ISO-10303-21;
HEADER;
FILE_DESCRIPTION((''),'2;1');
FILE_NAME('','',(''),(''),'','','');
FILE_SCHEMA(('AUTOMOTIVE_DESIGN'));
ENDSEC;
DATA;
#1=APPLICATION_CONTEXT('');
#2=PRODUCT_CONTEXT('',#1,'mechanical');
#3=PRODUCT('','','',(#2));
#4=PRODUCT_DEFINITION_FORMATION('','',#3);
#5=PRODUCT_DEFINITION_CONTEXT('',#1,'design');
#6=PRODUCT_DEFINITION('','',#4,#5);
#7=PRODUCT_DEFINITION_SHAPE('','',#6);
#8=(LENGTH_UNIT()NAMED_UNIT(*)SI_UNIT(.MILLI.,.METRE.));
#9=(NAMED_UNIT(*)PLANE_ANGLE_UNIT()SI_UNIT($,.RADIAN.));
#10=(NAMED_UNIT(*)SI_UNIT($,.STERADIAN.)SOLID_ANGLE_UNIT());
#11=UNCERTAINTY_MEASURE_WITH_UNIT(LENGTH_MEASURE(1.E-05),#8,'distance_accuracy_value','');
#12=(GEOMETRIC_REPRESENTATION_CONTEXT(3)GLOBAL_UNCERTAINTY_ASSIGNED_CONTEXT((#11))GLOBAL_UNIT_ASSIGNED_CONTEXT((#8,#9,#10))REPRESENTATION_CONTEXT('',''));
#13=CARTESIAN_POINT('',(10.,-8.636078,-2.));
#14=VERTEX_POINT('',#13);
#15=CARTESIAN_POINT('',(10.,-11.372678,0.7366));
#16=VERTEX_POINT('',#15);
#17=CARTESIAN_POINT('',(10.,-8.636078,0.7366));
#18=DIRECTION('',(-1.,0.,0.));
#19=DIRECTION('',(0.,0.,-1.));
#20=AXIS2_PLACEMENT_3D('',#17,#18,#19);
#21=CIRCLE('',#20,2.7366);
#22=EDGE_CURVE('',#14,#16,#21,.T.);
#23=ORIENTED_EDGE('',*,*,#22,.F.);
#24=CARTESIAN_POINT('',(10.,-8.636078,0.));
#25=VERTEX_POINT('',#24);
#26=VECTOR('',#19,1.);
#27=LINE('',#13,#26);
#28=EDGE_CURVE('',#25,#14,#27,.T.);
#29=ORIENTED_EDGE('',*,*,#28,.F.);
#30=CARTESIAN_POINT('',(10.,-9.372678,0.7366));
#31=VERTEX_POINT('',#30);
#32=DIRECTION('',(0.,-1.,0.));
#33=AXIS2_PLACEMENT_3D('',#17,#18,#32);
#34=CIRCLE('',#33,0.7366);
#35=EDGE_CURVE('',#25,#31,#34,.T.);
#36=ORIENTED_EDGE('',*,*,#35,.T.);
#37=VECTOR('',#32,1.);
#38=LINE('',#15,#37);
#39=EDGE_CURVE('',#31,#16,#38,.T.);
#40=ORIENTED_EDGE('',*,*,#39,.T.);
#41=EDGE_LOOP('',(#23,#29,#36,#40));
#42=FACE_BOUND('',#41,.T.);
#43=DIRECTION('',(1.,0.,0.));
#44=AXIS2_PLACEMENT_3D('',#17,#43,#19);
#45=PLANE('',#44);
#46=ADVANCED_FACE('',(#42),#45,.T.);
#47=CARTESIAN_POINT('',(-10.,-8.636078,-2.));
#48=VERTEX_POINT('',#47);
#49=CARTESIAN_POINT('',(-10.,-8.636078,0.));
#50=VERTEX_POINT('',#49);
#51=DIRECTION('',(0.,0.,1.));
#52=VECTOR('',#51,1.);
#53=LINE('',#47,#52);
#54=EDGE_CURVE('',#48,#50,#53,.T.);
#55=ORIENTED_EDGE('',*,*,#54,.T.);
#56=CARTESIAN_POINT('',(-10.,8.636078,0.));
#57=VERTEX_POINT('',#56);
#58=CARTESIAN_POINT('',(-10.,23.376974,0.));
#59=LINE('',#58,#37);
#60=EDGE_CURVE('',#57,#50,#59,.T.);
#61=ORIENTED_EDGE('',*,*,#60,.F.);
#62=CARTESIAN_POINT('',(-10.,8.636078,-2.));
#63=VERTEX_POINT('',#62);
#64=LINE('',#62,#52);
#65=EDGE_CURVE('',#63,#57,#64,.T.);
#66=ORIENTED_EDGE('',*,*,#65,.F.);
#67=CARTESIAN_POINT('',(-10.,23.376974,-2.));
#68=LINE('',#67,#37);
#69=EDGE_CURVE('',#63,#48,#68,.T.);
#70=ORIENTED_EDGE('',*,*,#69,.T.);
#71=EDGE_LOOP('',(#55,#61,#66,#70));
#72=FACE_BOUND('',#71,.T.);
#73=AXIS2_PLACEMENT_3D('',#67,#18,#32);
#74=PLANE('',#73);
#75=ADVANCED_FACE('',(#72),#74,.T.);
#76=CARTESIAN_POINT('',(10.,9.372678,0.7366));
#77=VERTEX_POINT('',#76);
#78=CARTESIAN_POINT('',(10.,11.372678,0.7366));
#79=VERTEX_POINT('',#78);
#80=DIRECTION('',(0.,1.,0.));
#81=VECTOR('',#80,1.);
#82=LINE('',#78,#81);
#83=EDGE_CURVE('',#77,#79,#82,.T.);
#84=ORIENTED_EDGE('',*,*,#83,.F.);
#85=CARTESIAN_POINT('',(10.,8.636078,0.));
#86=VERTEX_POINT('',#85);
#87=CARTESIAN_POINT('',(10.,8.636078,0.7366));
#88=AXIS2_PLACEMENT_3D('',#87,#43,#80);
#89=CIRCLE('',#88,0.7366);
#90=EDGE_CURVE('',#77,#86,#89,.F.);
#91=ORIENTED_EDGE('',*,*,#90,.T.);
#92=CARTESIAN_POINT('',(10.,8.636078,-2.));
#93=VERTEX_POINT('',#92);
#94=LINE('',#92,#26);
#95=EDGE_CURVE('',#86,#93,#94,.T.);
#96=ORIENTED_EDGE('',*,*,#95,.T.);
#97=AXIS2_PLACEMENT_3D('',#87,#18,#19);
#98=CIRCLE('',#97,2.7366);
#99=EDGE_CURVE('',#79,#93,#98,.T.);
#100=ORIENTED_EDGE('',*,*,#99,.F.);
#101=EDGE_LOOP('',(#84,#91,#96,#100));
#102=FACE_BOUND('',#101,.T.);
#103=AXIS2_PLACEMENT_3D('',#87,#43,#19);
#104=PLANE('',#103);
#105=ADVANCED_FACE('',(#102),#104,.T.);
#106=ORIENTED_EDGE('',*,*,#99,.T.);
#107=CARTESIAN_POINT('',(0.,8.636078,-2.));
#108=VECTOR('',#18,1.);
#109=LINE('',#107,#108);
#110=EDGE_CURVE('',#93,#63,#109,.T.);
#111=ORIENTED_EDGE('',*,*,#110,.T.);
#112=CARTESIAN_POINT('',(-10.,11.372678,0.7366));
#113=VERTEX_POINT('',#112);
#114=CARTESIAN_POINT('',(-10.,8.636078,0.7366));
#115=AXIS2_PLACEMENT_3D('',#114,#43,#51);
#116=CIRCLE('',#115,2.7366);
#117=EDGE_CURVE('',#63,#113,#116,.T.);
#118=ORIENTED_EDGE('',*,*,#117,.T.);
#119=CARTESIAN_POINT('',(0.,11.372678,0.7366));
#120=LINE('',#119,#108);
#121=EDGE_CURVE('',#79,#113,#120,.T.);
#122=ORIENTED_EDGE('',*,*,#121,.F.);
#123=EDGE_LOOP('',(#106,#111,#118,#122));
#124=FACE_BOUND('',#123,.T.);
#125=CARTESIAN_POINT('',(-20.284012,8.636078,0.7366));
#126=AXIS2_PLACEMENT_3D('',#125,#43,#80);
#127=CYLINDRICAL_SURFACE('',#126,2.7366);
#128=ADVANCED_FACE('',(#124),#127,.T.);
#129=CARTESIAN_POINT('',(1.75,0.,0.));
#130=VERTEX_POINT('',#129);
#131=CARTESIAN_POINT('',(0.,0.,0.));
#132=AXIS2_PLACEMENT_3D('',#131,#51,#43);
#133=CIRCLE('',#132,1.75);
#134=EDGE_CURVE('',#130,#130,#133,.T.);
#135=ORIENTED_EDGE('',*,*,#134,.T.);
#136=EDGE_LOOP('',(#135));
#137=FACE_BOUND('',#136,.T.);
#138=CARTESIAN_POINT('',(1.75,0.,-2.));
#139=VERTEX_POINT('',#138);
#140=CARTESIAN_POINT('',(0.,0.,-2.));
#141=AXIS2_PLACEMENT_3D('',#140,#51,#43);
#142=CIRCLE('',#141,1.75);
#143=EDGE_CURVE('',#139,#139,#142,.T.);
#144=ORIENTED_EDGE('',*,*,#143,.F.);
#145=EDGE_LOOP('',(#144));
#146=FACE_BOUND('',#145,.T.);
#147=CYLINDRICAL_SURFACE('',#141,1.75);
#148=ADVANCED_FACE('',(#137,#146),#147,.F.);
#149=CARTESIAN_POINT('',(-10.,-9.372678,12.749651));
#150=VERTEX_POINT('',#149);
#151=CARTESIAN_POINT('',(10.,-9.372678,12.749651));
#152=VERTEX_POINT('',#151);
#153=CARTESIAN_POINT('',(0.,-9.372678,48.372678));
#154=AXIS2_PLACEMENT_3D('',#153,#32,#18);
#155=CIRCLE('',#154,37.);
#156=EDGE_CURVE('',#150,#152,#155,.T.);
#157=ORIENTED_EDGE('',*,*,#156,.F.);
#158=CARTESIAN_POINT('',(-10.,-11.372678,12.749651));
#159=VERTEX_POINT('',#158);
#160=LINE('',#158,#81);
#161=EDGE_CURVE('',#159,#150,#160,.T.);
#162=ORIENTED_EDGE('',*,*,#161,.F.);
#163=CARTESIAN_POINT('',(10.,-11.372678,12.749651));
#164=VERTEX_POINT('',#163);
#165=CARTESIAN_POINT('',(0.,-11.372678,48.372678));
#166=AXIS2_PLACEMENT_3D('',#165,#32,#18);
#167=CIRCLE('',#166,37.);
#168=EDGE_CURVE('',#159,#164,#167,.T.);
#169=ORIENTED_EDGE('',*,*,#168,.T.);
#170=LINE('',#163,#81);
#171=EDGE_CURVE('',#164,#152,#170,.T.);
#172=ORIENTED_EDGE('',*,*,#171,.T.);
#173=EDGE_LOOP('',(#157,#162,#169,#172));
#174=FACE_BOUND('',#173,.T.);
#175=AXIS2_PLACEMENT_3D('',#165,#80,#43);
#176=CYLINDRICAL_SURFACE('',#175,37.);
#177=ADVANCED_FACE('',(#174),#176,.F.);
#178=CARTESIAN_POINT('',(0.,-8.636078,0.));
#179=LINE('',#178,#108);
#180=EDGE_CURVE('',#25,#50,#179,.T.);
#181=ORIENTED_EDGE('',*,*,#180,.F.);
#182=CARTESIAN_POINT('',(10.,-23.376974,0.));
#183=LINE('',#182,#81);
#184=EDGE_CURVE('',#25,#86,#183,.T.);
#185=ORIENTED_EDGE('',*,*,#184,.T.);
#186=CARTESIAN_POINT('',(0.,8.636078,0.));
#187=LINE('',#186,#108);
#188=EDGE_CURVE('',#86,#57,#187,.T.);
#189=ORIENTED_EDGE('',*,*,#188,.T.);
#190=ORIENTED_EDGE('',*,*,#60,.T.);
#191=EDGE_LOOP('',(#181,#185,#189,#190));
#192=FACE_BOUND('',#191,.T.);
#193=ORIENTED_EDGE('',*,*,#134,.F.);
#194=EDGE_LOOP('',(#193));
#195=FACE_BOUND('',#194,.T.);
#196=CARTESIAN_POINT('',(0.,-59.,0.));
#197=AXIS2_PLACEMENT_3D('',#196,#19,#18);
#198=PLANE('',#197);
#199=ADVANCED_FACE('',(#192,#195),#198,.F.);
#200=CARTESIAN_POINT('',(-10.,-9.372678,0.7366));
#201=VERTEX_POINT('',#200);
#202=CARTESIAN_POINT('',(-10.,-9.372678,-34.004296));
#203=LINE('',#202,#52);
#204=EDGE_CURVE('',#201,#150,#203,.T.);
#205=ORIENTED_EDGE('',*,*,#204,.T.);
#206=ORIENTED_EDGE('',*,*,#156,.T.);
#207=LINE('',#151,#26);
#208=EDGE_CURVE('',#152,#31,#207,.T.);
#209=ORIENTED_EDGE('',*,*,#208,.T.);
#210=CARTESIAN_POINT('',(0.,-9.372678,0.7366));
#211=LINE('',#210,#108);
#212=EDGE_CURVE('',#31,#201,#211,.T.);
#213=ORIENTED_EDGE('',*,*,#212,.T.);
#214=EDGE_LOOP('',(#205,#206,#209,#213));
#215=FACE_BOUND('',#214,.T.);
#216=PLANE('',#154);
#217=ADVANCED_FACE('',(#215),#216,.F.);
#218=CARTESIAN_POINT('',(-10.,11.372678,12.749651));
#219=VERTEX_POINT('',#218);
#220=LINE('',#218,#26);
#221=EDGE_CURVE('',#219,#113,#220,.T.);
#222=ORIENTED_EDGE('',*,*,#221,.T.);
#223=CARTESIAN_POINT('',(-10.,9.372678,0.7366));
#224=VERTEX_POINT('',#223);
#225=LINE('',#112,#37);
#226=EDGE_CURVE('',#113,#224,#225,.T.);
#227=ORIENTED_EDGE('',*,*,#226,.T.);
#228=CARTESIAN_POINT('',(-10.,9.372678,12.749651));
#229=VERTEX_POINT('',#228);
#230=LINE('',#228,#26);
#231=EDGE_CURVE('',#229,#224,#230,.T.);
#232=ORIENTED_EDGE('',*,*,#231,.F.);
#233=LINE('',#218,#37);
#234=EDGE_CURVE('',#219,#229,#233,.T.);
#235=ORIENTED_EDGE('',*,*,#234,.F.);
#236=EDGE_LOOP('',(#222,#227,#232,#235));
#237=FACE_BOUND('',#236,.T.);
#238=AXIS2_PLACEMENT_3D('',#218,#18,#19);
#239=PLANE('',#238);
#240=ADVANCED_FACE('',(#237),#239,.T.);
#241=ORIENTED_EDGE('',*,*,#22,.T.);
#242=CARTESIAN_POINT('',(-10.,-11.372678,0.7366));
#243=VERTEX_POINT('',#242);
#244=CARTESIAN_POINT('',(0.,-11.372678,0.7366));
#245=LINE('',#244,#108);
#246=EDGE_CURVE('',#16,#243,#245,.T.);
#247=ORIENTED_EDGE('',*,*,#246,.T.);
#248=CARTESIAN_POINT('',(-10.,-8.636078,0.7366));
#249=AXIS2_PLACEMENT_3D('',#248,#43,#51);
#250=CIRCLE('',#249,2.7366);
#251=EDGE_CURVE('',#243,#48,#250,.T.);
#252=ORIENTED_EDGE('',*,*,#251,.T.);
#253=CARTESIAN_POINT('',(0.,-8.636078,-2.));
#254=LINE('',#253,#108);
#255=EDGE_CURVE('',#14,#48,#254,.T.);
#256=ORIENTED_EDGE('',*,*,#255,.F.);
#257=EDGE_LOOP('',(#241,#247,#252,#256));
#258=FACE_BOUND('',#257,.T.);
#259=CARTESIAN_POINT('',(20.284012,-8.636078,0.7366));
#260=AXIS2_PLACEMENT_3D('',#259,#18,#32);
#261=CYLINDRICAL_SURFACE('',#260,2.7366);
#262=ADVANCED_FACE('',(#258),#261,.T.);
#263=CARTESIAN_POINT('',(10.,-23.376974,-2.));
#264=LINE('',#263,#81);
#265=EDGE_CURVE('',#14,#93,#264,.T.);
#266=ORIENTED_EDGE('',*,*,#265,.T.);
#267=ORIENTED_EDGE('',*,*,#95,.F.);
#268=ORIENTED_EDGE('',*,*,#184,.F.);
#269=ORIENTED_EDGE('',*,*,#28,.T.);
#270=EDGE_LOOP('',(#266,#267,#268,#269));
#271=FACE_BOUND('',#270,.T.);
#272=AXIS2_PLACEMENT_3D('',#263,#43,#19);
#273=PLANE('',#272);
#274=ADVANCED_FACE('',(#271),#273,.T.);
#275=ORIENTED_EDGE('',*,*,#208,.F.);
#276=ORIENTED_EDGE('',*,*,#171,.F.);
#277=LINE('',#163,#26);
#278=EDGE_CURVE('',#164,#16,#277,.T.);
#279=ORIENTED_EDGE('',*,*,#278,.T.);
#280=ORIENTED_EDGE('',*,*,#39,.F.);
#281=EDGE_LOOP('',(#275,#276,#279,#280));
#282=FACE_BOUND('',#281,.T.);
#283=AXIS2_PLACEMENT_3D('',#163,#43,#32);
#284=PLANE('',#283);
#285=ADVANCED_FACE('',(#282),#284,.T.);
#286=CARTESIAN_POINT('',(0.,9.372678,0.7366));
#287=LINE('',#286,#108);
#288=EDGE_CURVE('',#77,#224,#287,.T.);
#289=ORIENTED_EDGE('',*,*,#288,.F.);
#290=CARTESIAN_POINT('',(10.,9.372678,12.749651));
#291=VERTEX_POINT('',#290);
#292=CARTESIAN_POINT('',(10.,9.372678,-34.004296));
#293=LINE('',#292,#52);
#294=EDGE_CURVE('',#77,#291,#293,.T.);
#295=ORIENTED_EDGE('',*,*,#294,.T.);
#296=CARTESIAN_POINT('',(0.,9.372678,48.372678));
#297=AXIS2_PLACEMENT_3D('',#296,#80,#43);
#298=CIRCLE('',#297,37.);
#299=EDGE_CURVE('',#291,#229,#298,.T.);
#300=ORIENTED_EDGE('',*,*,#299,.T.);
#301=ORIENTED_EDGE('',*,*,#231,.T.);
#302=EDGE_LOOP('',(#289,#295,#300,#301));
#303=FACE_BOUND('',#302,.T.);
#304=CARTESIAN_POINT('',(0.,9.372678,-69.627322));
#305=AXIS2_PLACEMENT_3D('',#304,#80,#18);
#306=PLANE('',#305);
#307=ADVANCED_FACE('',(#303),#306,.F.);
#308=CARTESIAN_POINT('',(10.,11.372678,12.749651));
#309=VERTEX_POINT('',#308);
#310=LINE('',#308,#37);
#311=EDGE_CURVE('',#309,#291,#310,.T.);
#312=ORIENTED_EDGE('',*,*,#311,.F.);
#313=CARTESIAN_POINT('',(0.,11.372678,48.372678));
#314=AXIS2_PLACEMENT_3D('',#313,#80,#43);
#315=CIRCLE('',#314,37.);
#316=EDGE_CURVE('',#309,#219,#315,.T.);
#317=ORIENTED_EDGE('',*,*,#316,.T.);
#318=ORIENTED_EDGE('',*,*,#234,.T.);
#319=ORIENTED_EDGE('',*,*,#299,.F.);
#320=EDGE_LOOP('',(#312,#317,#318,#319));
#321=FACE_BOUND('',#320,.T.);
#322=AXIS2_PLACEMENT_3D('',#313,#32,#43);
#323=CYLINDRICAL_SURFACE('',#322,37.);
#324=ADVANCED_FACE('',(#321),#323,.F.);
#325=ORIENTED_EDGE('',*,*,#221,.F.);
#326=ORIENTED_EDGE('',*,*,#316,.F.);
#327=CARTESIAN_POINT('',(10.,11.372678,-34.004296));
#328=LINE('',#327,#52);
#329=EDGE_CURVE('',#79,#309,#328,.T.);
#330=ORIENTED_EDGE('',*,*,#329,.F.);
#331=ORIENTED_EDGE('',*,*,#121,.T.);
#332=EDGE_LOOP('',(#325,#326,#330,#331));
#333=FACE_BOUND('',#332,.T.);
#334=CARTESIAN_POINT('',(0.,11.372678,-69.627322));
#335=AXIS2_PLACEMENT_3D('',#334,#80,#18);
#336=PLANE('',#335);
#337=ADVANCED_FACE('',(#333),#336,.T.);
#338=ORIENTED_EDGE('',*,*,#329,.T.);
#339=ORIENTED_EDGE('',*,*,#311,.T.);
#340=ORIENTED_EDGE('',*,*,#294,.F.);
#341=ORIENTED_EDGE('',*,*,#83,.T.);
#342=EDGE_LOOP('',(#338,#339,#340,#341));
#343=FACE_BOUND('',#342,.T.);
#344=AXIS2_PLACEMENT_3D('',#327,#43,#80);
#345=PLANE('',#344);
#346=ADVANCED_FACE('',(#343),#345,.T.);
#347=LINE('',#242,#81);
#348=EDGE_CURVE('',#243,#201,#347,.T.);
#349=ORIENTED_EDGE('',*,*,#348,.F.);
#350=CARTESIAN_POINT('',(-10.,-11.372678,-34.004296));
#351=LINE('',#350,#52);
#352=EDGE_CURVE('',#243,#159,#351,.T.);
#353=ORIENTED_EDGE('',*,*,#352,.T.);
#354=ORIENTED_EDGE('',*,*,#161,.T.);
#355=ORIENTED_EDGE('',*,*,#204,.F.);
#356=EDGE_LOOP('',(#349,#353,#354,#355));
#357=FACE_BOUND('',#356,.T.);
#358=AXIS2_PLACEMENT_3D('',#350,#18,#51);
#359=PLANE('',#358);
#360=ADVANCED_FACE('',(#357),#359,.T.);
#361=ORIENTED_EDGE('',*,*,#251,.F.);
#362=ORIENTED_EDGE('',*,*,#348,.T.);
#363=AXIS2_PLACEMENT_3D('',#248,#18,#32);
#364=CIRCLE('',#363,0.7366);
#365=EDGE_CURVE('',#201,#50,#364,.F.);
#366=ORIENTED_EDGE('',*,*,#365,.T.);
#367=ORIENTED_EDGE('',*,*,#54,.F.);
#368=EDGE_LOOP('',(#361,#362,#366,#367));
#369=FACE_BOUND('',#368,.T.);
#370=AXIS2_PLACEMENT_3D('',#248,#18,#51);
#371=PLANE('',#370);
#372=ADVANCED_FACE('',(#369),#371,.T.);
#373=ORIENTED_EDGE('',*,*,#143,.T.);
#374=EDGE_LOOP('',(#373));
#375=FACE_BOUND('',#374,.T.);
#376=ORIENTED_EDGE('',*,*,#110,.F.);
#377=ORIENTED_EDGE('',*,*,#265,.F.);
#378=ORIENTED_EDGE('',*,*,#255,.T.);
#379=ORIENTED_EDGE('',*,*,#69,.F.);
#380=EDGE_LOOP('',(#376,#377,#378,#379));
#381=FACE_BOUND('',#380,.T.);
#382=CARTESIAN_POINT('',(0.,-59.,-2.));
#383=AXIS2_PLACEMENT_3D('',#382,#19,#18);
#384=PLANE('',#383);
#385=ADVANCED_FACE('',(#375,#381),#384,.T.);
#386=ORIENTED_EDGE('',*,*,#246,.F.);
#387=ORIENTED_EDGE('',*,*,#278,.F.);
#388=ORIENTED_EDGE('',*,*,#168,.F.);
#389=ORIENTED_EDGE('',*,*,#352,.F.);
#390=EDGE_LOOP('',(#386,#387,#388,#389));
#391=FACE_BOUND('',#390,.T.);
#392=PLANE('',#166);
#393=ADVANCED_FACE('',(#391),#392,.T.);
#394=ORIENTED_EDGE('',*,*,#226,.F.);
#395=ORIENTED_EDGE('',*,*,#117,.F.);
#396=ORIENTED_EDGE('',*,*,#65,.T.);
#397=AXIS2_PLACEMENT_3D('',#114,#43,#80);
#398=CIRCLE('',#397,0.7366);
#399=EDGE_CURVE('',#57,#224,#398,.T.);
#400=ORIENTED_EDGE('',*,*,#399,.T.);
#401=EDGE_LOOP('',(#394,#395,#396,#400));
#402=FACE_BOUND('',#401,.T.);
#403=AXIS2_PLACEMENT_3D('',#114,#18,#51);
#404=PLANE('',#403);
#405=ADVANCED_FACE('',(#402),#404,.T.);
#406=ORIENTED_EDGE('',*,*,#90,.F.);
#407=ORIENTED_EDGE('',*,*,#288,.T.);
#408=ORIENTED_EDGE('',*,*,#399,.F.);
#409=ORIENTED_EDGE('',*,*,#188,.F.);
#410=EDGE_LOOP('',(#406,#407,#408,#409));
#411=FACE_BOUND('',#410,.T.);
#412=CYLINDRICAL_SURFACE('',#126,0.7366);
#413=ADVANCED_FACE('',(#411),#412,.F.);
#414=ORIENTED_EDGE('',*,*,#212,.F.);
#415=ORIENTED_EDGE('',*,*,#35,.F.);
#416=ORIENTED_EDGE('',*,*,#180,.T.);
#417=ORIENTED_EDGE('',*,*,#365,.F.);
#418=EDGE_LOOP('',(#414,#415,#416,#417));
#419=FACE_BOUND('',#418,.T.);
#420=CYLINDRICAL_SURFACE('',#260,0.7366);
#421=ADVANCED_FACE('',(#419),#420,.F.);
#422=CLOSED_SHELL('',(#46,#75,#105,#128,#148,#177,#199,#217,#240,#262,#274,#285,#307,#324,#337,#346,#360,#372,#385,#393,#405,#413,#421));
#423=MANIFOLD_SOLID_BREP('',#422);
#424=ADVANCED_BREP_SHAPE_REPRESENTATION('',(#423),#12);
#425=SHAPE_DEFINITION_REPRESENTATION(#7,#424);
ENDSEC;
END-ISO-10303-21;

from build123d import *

# Parameters (mm, degrees)
SKETCH1_R                  = 1.75
BASE_FLANGE1_DEPTH         = 2
SKETCHED_START             = -24
SKETCHED_BEND1_OUTLINE_W   = 20
SKETCHED_BEND1_OUTLINE_H   = 2
SKETCHED_BEND1_DEPTH       = 12.627322451
SKETCHED_START_2           = 11.372677549
SKETCHED_BEND1_2_OUTLINE_W = 20
SKETCHED_BEND1_2_OUTLINE_H = 2
SKETCHED_BEND1_2_DEPTH     = 12.627322451
SKETCHED_START_3           = -11.114397241
SKETCHED_BEND1_3_DEPTH     = 1.741719692
SKETCHED_START_4           = 9.372677549
SKETCHED_BEND1_4_DEPTH     = 1.710960308
SKETCHED_START_5           = 8.636077549
SKETCHED_BEND1_5_DEPTH     = 2.7366
SKETCHED_START_6           = -11.372677549
SKETCHED_BEND1_6_DEPTH     = 2.7366
SKETCHED_START_7           = -10
SKETCHED_BEND1_7_DEPTH     = 20


with BuildPart() as part:
    # Base-Flange1: sheet metal written as solids
    # Sketch1 → Base-Flange1 (new body)
    with BuildSketch(Plane.XY):
        with BuildLine():
            Line((-10, 23.376973739), (-10, -23.376973739))
            ThreePointArc((-10, -23.376973739), (0, -22), (10, -23.376973739))
            Line((10, -23.376973739), (10, 23.376973739))
            ThreePointArc((10, 23.376973739), (0, 22), (-10, 23.376973739))
        make_face()
        Circle(SKETCH1_R, mode=Mode.SUBTRACT)
    extrude(amount=-BASE_FLANGE1_DEPTH)

    # Sketched Bend1: read off the stored shape, not the designer's step
    # Sketched Bend1 outline → Sketched Bend1 (cut)
    with BuildSketch(Plane(origin=(0, 0, 0), x_dir=(1, 0, 0), z_dir=(0, 1, 0)).offset(SKETCHED_START)):
        with Locations((0, 1)):
            Rectangle(SKETCHED_BEND1_OUTLINE_W, SKETCHED_BEND1_OUTLINE_H)
    extrude(amount=SKETCHED_BEND1_DEPTH, mode=Mode.SUBTRACT)

    # Sketched Bend1 2 outline → Sketched Bend1 2 (cut)
    with BuildSketch(Plane(origin=(0, 0, 0), x_dir=(1, 0, 0), z_dir=(0, 1, 0)).offset(SKETCHED_START_2)):
        with Locations((0, 1)):
            Rectangle(SKETCHED_BEND1_2_OUTLINE_W, SKETCHED_BEND1_2_OUTLINE_H)
    extrude(amount=SKETCHED_BEND1_2_DEPTH, mode=Mode.SUBTRACT)

    # Sketched Bend1 3 outline → Sketched Bend1 3 (add)
    with BuildSketch(Plane(origin=(0, 0, 0), x_dir=(1, 0, 0), z_dir=(0, 1, 0)).offset(SKETCHED_START_3)):
        with BuildLine():
            Line((10, 0), (-10, 0))
            Line((-10, 0), (-10, -12.749651288))
            ThreePointArc((-10, -12.749651288), (0, -11.372677549), (10, -12.749651288))
            Line((10, -12.749651288), (10, 0))
        make_face()
    extrude(amount=SKETCHED_BEND1_3_DEPTH)

    # Sketched Bend1 4 outline → Sketched Bend1 4 (add)
    with BuildSketch(Plane(origin=(0, 0, 0), x_dir=(1, 0, 0), z_dir=(0, 1, 0)).offset(SKETCHED_START_4)):
        with BuildLine():
            Line((10, 0), (-10, 0))
            Line((-10, 0), (-10, -12.749651288))
            ThreePointArc((-10, -12.749651288), (0, -11.372677549), (10, -12.749651288))
            Line((10, -12.749651288), (10, 0))
        make_face()
    extrude(amount=SKETCHED_BEND1_4_DEPTH)

    # Sketched Bend1 5 outline → Sketched Bend1 5 (add)
    with BuildSketch(Plane(origin=(0, 0, 0), x_dir=(1, 0, 0), z_dir=(0, 1, 0)).offset(SKETCHED_START_5)):
        with BuildLine():
            Line((-10, 0), (-10, -12.749651288))
            ThreePointArc((-10, -12.749651288), (0, -11.372677549), (10, -12.749651288))
            Line((10, -12.749651288), (10, 0))
            Line((10, 0), (-10, 0))
        make_face()
    extrude(amount=SKETCHED_BEND1_5_DEPTH)

    # Sketched Bend1 6 outline → Sketched Bend1 6 (add)
    with BuildSketch(Plane(origin=(0, 0, 0), x_dir=(1, 0, 0), z_dir=(0, 1, 0)).offset(SKETCHED_START_6)):
        with BuildLine():
            Line((-10, 0), (-10, -12.749651288))
            ThreePointArc((-10, -12.749651288), (0, -11.372677549), (10, -12.749651288))
            Line((10, -12.749651288), (10, 0))
            Line((10, 0), (-10, 0))
        make_face()
    extrude(amount=SKETCHED_BEND1_6_DEPTH)

    # Sketched Bend1 7 outline → Sketched Bend1 7 (cut)
    with BuildSketch(Plane.YZ.offset(SKETCHED_START_7)):
        with BuildLine():
            Line((-11.372677549, -2), (-8.636077549, -2))
            ThreePointArc((-8.636077549, -2), (-10.571145966, -1.198468418), (-11.372677549, 0.7366))
            Line((-11.372677549, 0.7366), (-11.372677549, -2))
        make_face()
        with BuildLine():
            ThreePointArc((11.372677549, 0.7366), (10.571145966, -1.198468418), (8.636077549, -2))
            Line((8.636077549, -2), (11.372677549, -2))
            Line((11.372677549, -2), (11.372677549, 0.7366))
        make_face()
        with BuildLine():
            Line((-8.636077549, 14), (-9.372677549, 14))
            Line((-9.372677549, 14), (-9.372677549, 0.7366))
            ThreePointArc((-9.372677549, 0.7366), (-9.156932404, 0.215745145), (-8.636077549, 0))
            Line((-8.636077549, 0), (-8.636077549, 14))
        make_face()
        with BuildLine():
            Line((9.372677549, 0.7366), (9.372677549, 14))
            Line((9.372677549, 14), (8.636077549, 14))
            Line((8.636077549, 14), (8.636077549, 0))
            ThreePointArc((8.636077549, 0), (9.156932404, 0.215745145), (9.372677549, 0.7366))
        make_face()
    extrude(amount=SKETCHED_BEND1_7_DEPTH, mode=Mode.SUBTRACT)


solid = part.part
